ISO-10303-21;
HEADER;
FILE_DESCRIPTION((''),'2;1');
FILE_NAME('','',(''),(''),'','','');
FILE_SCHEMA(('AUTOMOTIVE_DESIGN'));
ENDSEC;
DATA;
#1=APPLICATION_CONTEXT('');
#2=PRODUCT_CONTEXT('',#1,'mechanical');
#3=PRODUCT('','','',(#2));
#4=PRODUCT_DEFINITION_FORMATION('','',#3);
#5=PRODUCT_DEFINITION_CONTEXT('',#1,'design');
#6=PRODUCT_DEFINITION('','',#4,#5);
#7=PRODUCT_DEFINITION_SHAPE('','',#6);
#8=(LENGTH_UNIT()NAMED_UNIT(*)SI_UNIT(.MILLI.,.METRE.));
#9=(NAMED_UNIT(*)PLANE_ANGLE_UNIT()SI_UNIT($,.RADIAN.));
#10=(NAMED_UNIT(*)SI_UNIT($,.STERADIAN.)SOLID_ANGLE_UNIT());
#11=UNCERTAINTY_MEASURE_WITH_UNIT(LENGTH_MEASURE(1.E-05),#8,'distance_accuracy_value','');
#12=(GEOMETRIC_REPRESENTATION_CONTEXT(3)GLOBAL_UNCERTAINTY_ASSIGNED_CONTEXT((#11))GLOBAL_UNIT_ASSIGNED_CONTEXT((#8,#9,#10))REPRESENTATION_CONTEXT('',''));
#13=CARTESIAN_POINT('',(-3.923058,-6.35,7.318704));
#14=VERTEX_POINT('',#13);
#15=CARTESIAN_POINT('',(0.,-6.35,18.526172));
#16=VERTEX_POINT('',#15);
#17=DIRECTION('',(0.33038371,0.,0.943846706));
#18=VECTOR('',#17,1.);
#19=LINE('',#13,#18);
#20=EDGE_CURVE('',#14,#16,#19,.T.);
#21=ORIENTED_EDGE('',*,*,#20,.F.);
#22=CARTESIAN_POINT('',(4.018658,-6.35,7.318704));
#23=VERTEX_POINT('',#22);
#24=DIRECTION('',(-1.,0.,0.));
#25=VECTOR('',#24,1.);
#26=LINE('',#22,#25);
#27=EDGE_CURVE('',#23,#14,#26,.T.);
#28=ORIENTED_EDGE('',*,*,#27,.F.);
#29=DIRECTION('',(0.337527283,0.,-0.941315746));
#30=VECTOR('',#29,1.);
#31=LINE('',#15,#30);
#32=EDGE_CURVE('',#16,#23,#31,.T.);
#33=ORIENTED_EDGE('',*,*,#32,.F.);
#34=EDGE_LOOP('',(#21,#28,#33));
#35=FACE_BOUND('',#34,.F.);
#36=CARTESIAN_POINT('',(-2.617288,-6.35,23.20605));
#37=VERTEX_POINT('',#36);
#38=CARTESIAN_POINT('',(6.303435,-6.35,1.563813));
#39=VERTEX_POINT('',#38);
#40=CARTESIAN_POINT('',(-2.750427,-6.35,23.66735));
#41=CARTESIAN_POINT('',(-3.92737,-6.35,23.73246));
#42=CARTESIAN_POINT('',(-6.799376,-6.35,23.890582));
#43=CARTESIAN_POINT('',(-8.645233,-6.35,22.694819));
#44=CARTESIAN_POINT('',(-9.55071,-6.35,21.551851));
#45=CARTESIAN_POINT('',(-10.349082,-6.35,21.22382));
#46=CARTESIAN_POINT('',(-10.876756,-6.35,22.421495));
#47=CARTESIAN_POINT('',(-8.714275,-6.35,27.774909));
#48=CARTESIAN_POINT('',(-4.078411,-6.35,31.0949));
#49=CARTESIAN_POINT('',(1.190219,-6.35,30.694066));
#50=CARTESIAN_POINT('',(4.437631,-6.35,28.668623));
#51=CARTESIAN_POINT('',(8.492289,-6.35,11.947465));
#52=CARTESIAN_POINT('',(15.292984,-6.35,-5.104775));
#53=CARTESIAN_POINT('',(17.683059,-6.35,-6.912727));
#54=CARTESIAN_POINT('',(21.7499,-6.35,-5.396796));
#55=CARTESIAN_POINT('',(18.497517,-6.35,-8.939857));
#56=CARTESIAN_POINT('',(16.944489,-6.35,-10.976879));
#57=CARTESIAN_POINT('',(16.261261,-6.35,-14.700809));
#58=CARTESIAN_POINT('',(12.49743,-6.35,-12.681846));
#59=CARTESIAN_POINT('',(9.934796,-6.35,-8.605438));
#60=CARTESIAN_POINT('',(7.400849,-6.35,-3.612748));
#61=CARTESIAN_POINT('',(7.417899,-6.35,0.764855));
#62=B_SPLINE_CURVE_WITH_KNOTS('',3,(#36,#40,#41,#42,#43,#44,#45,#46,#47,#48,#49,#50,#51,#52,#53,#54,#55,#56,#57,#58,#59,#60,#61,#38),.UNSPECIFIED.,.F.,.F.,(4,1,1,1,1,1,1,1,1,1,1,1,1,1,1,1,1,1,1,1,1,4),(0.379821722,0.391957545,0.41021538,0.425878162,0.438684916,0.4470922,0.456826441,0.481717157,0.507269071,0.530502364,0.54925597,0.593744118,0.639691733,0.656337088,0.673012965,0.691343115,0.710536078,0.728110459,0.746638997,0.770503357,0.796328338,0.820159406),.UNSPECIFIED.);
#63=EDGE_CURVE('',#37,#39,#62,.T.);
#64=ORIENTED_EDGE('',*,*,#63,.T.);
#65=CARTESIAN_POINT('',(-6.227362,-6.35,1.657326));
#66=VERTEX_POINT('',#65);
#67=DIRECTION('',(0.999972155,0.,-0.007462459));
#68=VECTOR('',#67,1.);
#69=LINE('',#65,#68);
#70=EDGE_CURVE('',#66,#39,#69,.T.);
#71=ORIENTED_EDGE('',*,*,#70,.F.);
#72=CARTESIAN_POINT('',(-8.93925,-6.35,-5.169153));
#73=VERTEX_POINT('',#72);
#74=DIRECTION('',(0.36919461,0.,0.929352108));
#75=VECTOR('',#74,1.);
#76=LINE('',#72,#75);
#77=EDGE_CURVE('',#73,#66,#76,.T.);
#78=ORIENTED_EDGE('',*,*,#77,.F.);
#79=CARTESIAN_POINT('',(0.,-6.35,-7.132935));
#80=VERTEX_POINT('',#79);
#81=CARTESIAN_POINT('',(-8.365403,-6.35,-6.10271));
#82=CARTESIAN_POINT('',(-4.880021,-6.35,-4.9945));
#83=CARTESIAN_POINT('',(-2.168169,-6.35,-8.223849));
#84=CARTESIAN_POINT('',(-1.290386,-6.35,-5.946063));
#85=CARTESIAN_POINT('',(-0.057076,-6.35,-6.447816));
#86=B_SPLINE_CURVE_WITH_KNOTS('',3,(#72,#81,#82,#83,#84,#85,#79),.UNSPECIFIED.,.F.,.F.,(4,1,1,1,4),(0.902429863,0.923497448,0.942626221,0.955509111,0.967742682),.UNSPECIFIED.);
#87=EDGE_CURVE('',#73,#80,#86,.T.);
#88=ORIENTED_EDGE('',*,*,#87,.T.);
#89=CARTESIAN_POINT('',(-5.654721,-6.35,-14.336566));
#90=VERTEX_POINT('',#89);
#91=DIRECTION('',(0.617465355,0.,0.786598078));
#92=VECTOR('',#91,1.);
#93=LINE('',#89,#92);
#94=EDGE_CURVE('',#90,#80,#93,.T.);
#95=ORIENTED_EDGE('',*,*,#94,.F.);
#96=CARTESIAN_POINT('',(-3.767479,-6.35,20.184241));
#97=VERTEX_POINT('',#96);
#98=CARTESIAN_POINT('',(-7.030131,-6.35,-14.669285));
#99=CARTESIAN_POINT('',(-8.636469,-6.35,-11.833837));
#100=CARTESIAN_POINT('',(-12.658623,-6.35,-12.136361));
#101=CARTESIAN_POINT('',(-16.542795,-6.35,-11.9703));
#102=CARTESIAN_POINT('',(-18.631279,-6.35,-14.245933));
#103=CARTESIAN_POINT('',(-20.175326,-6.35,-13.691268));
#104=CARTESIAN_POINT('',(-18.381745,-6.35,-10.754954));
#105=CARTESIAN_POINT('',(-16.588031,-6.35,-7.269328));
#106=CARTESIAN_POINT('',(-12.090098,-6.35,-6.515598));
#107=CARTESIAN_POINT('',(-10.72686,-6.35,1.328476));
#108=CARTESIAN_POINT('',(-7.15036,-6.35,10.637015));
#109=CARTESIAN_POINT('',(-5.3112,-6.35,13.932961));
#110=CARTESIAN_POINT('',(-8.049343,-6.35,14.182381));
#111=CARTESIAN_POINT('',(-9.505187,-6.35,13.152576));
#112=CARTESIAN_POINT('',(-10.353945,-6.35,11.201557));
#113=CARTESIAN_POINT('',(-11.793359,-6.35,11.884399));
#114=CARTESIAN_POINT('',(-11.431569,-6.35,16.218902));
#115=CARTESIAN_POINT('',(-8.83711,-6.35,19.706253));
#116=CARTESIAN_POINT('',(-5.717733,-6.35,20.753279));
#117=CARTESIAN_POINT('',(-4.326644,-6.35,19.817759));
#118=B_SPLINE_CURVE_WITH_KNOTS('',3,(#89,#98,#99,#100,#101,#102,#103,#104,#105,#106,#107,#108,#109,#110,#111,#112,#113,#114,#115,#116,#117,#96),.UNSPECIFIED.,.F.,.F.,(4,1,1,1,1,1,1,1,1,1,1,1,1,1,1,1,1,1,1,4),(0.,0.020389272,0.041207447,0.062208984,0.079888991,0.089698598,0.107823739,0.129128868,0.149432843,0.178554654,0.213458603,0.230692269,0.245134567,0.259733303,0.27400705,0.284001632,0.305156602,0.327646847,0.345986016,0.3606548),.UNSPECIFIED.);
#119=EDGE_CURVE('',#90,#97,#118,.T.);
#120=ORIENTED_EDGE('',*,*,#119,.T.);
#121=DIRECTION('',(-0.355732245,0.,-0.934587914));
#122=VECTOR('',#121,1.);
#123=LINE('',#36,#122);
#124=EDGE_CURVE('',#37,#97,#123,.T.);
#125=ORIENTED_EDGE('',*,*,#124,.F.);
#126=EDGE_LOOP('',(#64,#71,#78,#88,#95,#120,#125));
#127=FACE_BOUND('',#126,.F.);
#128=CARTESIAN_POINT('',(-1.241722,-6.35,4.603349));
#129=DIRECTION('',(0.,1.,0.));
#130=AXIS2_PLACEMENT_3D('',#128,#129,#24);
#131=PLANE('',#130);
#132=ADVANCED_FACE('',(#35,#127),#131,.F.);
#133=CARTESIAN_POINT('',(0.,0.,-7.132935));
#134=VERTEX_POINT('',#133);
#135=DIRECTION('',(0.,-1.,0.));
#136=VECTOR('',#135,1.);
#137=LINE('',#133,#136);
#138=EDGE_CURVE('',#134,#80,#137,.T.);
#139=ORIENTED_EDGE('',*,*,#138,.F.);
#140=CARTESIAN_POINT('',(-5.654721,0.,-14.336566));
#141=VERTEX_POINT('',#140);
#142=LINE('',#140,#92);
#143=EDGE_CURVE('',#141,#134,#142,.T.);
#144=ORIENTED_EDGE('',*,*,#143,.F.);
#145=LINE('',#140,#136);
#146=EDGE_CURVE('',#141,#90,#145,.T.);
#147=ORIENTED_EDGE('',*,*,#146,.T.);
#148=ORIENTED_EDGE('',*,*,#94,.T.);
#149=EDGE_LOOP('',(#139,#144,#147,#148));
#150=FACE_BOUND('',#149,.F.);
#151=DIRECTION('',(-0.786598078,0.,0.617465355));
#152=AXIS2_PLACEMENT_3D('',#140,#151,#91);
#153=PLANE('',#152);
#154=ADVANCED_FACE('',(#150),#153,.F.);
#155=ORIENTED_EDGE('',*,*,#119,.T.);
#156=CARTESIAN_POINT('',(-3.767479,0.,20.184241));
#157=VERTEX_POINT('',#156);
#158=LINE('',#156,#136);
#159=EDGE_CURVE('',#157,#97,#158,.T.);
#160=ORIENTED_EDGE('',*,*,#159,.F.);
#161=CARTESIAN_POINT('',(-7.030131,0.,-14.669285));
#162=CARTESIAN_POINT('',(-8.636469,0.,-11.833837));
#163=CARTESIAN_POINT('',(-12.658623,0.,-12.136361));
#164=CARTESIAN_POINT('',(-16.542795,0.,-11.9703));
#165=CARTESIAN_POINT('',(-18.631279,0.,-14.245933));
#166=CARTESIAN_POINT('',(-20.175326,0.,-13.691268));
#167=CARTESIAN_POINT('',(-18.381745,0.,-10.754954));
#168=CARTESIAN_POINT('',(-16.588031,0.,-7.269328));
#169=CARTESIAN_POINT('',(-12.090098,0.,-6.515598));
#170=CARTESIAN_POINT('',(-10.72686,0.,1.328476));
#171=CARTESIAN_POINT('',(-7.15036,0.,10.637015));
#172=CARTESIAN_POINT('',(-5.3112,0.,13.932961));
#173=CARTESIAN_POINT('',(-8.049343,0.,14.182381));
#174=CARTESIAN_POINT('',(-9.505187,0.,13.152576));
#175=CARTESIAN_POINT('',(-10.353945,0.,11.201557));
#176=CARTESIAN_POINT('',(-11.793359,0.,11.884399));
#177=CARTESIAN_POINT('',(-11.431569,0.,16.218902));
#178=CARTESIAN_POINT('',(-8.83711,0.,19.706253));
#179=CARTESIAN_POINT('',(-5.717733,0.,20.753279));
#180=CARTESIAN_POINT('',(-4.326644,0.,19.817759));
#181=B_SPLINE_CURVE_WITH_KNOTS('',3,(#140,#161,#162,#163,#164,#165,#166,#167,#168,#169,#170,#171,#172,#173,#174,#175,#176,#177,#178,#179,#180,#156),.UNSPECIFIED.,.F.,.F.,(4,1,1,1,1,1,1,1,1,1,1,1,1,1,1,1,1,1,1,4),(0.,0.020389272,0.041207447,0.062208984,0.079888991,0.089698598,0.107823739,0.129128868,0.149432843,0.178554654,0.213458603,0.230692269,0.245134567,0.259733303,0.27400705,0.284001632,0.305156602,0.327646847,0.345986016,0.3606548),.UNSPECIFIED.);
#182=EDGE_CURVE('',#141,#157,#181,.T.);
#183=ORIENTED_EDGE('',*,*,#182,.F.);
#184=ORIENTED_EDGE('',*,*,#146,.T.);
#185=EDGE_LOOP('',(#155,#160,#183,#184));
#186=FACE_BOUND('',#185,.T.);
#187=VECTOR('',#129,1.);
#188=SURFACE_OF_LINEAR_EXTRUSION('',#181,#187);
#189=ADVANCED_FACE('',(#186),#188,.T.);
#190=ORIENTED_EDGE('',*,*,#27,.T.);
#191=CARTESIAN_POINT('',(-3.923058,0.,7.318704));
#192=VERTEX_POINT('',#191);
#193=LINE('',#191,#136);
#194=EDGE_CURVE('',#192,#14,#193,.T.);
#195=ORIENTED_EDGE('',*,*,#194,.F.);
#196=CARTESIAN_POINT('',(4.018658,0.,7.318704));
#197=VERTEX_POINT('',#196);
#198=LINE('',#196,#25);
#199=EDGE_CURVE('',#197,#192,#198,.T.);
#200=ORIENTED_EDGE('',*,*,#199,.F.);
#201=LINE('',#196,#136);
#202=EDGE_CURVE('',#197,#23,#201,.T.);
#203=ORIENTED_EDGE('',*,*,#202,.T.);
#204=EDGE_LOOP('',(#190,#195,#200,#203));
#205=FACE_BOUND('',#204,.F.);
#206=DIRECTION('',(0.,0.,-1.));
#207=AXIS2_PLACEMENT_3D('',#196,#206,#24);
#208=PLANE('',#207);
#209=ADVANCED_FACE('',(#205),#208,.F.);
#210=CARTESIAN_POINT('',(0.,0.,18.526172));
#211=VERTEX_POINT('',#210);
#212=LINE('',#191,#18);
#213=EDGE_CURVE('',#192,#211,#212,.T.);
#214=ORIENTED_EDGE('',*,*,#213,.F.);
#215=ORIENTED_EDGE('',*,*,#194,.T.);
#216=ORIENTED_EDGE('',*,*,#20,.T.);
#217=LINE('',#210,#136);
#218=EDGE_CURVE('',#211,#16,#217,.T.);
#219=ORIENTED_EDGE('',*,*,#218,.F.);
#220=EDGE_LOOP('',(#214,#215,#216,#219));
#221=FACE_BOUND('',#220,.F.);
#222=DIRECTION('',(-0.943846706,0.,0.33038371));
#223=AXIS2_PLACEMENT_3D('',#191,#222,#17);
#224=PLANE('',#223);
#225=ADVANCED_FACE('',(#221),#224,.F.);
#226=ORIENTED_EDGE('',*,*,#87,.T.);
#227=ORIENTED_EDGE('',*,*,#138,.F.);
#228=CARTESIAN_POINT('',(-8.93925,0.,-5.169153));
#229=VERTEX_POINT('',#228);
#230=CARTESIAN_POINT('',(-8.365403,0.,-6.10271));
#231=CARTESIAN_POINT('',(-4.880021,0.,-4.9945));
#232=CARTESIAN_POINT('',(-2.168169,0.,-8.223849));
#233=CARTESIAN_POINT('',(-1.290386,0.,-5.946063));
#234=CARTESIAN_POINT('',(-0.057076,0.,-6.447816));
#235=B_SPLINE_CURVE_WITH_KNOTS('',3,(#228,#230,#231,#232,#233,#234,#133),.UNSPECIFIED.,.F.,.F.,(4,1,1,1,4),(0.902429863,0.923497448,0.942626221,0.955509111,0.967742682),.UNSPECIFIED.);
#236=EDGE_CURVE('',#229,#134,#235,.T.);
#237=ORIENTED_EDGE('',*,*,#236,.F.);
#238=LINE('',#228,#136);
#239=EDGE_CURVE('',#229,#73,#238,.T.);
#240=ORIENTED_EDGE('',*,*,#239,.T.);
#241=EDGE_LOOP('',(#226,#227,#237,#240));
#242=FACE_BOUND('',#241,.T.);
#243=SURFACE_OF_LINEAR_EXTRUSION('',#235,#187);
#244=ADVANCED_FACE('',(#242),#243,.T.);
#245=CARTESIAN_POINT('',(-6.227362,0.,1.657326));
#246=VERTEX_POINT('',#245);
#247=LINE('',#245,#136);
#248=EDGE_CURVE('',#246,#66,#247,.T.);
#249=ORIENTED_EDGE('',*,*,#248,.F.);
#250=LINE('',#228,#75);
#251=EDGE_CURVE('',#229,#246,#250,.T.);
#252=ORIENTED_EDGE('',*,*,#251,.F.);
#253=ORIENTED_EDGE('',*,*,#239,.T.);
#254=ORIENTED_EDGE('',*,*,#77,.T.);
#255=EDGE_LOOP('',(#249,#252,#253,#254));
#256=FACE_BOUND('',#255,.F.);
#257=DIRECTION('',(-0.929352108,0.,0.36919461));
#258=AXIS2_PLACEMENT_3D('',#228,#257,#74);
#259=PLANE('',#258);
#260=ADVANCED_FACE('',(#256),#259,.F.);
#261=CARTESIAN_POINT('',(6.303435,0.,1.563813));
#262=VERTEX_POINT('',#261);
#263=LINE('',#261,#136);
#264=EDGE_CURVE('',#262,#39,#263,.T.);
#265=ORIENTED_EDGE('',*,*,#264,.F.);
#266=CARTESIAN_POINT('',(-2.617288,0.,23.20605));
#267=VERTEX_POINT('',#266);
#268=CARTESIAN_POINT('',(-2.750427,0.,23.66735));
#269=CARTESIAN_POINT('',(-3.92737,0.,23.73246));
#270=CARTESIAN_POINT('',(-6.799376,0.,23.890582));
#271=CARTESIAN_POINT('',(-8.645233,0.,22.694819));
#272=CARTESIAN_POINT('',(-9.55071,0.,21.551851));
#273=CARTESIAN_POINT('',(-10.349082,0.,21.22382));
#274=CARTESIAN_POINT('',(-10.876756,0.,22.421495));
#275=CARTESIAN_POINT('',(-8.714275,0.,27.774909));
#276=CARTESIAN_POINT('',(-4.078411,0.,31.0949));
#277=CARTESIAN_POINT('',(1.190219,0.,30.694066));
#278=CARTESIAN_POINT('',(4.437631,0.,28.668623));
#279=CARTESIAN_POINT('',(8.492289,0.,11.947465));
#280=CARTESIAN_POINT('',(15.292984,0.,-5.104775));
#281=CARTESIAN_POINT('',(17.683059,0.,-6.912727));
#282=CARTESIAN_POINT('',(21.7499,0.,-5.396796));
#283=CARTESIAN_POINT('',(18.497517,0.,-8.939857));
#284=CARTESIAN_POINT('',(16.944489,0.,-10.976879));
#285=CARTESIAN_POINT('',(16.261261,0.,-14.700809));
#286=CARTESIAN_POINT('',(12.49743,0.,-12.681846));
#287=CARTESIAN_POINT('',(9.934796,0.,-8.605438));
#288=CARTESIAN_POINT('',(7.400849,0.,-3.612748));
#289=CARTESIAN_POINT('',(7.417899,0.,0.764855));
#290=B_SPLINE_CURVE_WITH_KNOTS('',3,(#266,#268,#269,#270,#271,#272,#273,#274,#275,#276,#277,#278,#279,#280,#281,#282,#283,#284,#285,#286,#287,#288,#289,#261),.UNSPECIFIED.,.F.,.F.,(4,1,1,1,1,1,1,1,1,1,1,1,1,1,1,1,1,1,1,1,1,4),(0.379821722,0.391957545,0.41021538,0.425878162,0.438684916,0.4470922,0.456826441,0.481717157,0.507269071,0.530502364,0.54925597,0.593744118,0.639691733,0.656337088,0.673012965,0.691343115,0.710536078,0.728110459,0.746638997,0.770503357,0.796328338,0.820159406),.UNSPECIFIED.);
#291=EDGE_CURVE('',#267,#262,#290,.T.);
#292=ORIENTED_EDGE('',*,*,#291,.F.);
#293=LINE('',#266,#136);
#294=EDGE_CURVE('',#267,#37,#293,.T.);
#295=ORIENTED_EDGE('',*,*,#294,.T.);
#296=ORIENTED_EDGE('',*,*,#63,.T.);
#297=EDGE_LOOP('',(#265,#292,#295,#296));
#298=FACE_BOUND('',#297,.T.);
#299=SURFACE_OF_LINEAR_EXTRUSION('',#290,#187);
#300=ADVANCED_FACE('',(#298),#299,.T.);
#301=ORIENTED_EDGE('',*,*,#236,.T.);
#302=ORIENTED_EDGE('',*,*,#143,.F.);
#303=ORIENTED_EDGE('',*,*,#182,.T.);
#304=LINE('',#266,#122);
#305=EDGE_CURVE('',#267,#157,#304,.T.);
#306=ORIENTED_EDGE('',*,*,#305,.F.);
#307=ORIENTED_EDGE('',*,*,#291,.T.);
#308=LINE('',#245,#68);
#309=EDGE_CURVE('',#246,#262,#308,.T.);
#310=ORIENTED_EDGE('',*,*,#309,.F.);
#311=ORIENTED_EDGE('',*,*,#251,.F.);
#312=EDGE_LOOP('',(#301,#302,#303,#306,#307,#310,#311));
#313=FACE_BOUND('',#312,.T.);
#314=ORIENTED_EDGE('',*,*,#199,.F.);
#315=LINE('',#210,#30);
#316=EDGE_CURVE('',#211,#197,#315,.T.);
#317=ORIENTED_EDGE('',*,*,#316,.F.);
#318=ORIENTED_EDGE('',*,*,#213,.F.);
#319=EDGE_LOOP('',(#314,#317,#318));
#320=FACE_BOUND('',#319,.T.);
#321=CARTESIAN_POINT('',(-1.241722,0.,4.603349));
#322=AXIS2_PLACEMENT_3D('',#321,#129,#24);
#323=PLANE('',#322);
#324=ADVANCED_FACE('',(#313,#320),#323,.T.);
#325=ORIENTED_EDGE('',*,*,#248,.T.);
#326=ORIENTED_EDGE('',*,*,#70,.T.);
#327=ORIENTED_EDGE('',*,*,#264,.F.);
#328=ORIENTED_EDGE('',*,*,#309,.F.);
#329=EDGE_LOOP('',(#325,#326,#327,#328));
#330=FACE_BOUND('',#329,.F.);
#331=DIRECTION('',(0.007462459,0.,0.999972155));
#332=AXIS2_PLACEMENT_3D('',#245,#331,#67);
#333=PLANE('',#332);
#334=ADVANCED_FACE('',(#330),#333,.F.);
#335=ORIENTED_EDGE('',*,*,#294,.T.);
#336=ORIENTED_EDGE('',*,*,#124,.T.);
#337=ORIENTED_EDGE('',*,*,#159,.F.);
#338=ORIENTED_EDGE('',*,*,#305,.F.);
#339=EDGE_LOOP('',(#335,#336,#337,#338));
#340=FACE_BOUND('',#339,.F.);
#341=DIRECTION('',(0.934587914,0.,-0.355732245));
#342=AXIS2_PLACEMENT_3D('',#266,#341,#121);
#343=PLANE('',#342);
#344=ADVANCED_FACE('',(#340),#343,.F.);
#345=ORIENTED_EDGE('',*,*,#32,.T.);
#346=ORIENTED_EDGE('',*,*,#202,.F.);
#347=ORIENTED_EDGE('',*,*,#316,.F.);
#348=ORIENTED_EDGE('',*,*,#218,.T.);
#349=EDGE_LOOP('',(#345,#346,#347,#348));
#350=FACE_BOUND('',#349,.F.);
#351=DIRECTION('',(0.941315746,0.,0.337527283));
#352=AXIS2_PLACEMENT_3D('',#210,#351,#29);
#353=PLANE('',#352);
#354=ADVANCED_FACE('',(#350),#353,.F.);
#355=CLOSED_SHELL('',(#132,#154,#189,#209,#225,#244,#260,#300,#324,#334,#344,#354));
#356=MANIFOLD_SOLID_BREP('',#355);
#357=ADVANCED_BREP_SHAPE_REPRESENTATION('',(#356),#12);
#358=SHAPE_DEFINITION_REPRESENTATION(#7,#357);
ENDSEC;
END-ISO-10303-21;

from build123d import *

# Parameters (mm, degrees)
F2_DEPTH = 6.35


with BuildPart() as f2:
    # F0 (on Front) → F2 (new body)
    with BuildSketch(Plane.XZ):
        with BuildLine():
            add(Edge.make_bspline(
                [(-5.6547205895, -14.3365655094), (-7.0301308965, -14.6692847815), (-8.63646893, -11.8338371449), (-12.6586229193, -12.1363609257), (-16.5427947807, -11.9703002383), (-18.6312785028, -14.2459332261), (-20.1753261579, -13.691267767), (-18.3817454418, -10.7549540998), (-16.5880310826, -7.2693282581), (-12.090098104, -6.5155976165), (-10.7268601383, 1.3284755436), (-7.15035983, 10.6370147616), (-5.3111997393, 13.9329612279), (-8.0493431527, 14.1823809395), (-9.5051874807, 13.1525759378), (-10.3539445589, 11.2015570355), (-11.7933586196, 11.8843985956), (-11.4315691698, 16.2189016599), (-8.8371104329, 19.7062529683), (-5.7177325321, 20.7532793843), (-4.3266438554, 19.8177589978), (-3.7674787454, 20.1842412353)],
                knots=[0, 0, 0, 0, 0.0203892715, 0.0412074472, 0.0622089842, 0.0798889909, 0.0896985978, 0.1078237394, 0.129128868, 0.149432843, 0.1785546542, 0.2134586028, 0.2306922687, 0.245134567, 0.259733303, 0.2740070502, 0.2840016317, 0.3051566024, 0.3276468472, 0.3459860162, 0.3606548005, 0.3606548005, 0.3606548005, 0.3606548005], degree=3))
            Line((-5.6547205895, -14.3365655094), (0, -7.1329348721))
            add(Edge.make_bspline(
                [(-8.9392503724, -5.1691527478), (-8.3654029688, -6.1027103997), (-4.8800205477, -4.9944999403), (-2.1681694978, -8.2238494187), (-1.2903858198, -5.9460625327), (-0.0570759533, -6.4478163395), (0, -7.1329348721)],
                knots=[0.9024298628, 0.9024298628, 0.9024298628, 0.9024298628, 0.9234974476, 0.9426262213, 0.9555091115, 0.9677426818, 0.9677426818, 0.9677426818, 0.9677426818], degree=3))
            add(Edge.make_bspline(
                [(-6.2273619696, 1.6573261237), (-8.1571238525, 0.2387861816), (-9.7261491674, -3.8889946661), (-8.9392503724, -5.1691527478)],
                knots=[0.87354055, 0.87354055, 0.87354055, 0.87354055, 0.9024298628, 0.9024298628, 0.9024298628, 0.9024298628], degree=3))
            add(Edge.make_bspline(
                [(6.3034351915, 1.5638129553), (5.0512890113, 2.4614749756), (-0.270467213, 0.974484873), (-4.450124604, 2.9637475076), (-6.2273619696, 1.6573261237)],
                knots=[0.820159406, 0.820159406, 0.820159406, 0.820159406, 0.8469345906, 0.87354055, 0.87354055, 0.87354055, 0.87354055], degree=3))
            add(Edge.make_bspline(
                [(-2.6172876824, 23.2060495764), (-2.7504274329, 23.6673500074), (-3.9273703778, 23.732459794), (-6.7993760502, 23.8905815965), (-8.645232641, 22.6948188039), (-9.5507095241, 21.5518513633), (-10.3490816321, 21.2238199588), (-10.8767561118, 22.4214945327), (-8.7142751374, 27.774908602), (-4.0784113472, 31.0949001576), (1.1902189676, 30.6940663093), (4.4376310941, 28.668622615), (8.492288771, 11.9474647708), (15.292983919, -5.1047749298), (17.6830588612, -6.912726707), (21.7499000452, -5.3967962413), (18.4975174925, -8.9398570877), (16.9444889997, -10.9768788506), (16.2612606887, -14.7008093867), (12.4974303238, -12.6818460945), (9.9347955146, -8.6054380584), (7.4008489181, -3.6127481897), (7.4178992577, 0.7648550692), (6.3034351915, 1.5638129553)],
                knots=[0.3798217217, 0.3798217217, 0.3798217217, 0.3798217217, 0.3919575446, 0.4102153796, 0.4258781621, 0.4386849161, 0.4470921999, 0.4568264408, 0.4817171565, 0.5072690713, 0.530502364, 0.5492559702, 0.5937441178, 0.6396917328, 0.6563370883, 0.6730129651, 0.6913431153, 0.710536078, 0.7281104592, 0.7466389971, 0.7705033569, 0.7963283378, 0.820159406, 0.820159406, 0.820159406, 0.820159406], degree=3))
            add(Edge.make_bspline(
                [(-3.7674787454, 20.1842412353), (-3.0368474003, 20.6631041066), (-2.4070111209, 22.4774867838), (-2.6172876824, 23.2060495764)],
                knots=[0.3606548005, 0.3606548005, 0.3606548005, 0.3606548005, 0.3798217217, 0.3798217217, 0.3798217217, 0.3798217217], degree=3))
        make_face()
        Polygon((-3.9230575785, 7.3187039234), (0, 18.5261722654), (4.0186583064, 7.3187039234), align=None, mode=Mode.SUBTRACT)
        with BuildLine():
            Line((-2.6172876824, 23.2060495764), (-3.7674787454, 20.1842412353))
            add(Edge.make_bspline(
                [(-3.7674787454, 20.1842412353), (-3.0368474003, 20.6631041066), (-2.4070111209, 22.4774867838), (-2.6172876824, 23.2060495764)],
                knots=[0.3606548005, 0.3606548005, 0.3606548005, 0.3606548005, 0.3798217217, 0.3798217217, 0.3798217217, 0.3798217217], degree=3))
        make_face()
        with BuildLine():
            add(Edge.make_bspline(
                [(-6.2273619696, 1.6573261237), (-8.1571238525, 0.2387861816), (-9.7261491674, -3.8889946661), (-8.9392503724, -5.1691527478)],
                knots=[0.87354055, 0.87354055, 0.87354055, 0.87354055, 0.9024298628, 0.9024298628, 0.9024298628, 0.9024298628], degree=3))
            Line((-8.9392503724, -5.1691527478), (-6.2273619696, 1.6573261237))
        make_face()
        with BuildLine():
            Line((-6.2273619696, 1.6573261237), (6.3034351915, 1.5638129553))
            add(Edge.make_bspline(
                [(6.3034351915, 1.5638129553), (5.0512890113, 2.4614749756), (-0.270467213, 0.974484873), (-4.450124604, 2.9637475076), (-6.2273619696, 1.6573261237)],
                knots=[0.820159406, 0.820159406, 0.820159406, 0.820159406, 0.8469345906, 0.87354055, 0.87354055, 0.87354055, 0.87354055], degree=3))
        make_face()
    extrude(amount=F2_DEPTH)


solid = f2.part
